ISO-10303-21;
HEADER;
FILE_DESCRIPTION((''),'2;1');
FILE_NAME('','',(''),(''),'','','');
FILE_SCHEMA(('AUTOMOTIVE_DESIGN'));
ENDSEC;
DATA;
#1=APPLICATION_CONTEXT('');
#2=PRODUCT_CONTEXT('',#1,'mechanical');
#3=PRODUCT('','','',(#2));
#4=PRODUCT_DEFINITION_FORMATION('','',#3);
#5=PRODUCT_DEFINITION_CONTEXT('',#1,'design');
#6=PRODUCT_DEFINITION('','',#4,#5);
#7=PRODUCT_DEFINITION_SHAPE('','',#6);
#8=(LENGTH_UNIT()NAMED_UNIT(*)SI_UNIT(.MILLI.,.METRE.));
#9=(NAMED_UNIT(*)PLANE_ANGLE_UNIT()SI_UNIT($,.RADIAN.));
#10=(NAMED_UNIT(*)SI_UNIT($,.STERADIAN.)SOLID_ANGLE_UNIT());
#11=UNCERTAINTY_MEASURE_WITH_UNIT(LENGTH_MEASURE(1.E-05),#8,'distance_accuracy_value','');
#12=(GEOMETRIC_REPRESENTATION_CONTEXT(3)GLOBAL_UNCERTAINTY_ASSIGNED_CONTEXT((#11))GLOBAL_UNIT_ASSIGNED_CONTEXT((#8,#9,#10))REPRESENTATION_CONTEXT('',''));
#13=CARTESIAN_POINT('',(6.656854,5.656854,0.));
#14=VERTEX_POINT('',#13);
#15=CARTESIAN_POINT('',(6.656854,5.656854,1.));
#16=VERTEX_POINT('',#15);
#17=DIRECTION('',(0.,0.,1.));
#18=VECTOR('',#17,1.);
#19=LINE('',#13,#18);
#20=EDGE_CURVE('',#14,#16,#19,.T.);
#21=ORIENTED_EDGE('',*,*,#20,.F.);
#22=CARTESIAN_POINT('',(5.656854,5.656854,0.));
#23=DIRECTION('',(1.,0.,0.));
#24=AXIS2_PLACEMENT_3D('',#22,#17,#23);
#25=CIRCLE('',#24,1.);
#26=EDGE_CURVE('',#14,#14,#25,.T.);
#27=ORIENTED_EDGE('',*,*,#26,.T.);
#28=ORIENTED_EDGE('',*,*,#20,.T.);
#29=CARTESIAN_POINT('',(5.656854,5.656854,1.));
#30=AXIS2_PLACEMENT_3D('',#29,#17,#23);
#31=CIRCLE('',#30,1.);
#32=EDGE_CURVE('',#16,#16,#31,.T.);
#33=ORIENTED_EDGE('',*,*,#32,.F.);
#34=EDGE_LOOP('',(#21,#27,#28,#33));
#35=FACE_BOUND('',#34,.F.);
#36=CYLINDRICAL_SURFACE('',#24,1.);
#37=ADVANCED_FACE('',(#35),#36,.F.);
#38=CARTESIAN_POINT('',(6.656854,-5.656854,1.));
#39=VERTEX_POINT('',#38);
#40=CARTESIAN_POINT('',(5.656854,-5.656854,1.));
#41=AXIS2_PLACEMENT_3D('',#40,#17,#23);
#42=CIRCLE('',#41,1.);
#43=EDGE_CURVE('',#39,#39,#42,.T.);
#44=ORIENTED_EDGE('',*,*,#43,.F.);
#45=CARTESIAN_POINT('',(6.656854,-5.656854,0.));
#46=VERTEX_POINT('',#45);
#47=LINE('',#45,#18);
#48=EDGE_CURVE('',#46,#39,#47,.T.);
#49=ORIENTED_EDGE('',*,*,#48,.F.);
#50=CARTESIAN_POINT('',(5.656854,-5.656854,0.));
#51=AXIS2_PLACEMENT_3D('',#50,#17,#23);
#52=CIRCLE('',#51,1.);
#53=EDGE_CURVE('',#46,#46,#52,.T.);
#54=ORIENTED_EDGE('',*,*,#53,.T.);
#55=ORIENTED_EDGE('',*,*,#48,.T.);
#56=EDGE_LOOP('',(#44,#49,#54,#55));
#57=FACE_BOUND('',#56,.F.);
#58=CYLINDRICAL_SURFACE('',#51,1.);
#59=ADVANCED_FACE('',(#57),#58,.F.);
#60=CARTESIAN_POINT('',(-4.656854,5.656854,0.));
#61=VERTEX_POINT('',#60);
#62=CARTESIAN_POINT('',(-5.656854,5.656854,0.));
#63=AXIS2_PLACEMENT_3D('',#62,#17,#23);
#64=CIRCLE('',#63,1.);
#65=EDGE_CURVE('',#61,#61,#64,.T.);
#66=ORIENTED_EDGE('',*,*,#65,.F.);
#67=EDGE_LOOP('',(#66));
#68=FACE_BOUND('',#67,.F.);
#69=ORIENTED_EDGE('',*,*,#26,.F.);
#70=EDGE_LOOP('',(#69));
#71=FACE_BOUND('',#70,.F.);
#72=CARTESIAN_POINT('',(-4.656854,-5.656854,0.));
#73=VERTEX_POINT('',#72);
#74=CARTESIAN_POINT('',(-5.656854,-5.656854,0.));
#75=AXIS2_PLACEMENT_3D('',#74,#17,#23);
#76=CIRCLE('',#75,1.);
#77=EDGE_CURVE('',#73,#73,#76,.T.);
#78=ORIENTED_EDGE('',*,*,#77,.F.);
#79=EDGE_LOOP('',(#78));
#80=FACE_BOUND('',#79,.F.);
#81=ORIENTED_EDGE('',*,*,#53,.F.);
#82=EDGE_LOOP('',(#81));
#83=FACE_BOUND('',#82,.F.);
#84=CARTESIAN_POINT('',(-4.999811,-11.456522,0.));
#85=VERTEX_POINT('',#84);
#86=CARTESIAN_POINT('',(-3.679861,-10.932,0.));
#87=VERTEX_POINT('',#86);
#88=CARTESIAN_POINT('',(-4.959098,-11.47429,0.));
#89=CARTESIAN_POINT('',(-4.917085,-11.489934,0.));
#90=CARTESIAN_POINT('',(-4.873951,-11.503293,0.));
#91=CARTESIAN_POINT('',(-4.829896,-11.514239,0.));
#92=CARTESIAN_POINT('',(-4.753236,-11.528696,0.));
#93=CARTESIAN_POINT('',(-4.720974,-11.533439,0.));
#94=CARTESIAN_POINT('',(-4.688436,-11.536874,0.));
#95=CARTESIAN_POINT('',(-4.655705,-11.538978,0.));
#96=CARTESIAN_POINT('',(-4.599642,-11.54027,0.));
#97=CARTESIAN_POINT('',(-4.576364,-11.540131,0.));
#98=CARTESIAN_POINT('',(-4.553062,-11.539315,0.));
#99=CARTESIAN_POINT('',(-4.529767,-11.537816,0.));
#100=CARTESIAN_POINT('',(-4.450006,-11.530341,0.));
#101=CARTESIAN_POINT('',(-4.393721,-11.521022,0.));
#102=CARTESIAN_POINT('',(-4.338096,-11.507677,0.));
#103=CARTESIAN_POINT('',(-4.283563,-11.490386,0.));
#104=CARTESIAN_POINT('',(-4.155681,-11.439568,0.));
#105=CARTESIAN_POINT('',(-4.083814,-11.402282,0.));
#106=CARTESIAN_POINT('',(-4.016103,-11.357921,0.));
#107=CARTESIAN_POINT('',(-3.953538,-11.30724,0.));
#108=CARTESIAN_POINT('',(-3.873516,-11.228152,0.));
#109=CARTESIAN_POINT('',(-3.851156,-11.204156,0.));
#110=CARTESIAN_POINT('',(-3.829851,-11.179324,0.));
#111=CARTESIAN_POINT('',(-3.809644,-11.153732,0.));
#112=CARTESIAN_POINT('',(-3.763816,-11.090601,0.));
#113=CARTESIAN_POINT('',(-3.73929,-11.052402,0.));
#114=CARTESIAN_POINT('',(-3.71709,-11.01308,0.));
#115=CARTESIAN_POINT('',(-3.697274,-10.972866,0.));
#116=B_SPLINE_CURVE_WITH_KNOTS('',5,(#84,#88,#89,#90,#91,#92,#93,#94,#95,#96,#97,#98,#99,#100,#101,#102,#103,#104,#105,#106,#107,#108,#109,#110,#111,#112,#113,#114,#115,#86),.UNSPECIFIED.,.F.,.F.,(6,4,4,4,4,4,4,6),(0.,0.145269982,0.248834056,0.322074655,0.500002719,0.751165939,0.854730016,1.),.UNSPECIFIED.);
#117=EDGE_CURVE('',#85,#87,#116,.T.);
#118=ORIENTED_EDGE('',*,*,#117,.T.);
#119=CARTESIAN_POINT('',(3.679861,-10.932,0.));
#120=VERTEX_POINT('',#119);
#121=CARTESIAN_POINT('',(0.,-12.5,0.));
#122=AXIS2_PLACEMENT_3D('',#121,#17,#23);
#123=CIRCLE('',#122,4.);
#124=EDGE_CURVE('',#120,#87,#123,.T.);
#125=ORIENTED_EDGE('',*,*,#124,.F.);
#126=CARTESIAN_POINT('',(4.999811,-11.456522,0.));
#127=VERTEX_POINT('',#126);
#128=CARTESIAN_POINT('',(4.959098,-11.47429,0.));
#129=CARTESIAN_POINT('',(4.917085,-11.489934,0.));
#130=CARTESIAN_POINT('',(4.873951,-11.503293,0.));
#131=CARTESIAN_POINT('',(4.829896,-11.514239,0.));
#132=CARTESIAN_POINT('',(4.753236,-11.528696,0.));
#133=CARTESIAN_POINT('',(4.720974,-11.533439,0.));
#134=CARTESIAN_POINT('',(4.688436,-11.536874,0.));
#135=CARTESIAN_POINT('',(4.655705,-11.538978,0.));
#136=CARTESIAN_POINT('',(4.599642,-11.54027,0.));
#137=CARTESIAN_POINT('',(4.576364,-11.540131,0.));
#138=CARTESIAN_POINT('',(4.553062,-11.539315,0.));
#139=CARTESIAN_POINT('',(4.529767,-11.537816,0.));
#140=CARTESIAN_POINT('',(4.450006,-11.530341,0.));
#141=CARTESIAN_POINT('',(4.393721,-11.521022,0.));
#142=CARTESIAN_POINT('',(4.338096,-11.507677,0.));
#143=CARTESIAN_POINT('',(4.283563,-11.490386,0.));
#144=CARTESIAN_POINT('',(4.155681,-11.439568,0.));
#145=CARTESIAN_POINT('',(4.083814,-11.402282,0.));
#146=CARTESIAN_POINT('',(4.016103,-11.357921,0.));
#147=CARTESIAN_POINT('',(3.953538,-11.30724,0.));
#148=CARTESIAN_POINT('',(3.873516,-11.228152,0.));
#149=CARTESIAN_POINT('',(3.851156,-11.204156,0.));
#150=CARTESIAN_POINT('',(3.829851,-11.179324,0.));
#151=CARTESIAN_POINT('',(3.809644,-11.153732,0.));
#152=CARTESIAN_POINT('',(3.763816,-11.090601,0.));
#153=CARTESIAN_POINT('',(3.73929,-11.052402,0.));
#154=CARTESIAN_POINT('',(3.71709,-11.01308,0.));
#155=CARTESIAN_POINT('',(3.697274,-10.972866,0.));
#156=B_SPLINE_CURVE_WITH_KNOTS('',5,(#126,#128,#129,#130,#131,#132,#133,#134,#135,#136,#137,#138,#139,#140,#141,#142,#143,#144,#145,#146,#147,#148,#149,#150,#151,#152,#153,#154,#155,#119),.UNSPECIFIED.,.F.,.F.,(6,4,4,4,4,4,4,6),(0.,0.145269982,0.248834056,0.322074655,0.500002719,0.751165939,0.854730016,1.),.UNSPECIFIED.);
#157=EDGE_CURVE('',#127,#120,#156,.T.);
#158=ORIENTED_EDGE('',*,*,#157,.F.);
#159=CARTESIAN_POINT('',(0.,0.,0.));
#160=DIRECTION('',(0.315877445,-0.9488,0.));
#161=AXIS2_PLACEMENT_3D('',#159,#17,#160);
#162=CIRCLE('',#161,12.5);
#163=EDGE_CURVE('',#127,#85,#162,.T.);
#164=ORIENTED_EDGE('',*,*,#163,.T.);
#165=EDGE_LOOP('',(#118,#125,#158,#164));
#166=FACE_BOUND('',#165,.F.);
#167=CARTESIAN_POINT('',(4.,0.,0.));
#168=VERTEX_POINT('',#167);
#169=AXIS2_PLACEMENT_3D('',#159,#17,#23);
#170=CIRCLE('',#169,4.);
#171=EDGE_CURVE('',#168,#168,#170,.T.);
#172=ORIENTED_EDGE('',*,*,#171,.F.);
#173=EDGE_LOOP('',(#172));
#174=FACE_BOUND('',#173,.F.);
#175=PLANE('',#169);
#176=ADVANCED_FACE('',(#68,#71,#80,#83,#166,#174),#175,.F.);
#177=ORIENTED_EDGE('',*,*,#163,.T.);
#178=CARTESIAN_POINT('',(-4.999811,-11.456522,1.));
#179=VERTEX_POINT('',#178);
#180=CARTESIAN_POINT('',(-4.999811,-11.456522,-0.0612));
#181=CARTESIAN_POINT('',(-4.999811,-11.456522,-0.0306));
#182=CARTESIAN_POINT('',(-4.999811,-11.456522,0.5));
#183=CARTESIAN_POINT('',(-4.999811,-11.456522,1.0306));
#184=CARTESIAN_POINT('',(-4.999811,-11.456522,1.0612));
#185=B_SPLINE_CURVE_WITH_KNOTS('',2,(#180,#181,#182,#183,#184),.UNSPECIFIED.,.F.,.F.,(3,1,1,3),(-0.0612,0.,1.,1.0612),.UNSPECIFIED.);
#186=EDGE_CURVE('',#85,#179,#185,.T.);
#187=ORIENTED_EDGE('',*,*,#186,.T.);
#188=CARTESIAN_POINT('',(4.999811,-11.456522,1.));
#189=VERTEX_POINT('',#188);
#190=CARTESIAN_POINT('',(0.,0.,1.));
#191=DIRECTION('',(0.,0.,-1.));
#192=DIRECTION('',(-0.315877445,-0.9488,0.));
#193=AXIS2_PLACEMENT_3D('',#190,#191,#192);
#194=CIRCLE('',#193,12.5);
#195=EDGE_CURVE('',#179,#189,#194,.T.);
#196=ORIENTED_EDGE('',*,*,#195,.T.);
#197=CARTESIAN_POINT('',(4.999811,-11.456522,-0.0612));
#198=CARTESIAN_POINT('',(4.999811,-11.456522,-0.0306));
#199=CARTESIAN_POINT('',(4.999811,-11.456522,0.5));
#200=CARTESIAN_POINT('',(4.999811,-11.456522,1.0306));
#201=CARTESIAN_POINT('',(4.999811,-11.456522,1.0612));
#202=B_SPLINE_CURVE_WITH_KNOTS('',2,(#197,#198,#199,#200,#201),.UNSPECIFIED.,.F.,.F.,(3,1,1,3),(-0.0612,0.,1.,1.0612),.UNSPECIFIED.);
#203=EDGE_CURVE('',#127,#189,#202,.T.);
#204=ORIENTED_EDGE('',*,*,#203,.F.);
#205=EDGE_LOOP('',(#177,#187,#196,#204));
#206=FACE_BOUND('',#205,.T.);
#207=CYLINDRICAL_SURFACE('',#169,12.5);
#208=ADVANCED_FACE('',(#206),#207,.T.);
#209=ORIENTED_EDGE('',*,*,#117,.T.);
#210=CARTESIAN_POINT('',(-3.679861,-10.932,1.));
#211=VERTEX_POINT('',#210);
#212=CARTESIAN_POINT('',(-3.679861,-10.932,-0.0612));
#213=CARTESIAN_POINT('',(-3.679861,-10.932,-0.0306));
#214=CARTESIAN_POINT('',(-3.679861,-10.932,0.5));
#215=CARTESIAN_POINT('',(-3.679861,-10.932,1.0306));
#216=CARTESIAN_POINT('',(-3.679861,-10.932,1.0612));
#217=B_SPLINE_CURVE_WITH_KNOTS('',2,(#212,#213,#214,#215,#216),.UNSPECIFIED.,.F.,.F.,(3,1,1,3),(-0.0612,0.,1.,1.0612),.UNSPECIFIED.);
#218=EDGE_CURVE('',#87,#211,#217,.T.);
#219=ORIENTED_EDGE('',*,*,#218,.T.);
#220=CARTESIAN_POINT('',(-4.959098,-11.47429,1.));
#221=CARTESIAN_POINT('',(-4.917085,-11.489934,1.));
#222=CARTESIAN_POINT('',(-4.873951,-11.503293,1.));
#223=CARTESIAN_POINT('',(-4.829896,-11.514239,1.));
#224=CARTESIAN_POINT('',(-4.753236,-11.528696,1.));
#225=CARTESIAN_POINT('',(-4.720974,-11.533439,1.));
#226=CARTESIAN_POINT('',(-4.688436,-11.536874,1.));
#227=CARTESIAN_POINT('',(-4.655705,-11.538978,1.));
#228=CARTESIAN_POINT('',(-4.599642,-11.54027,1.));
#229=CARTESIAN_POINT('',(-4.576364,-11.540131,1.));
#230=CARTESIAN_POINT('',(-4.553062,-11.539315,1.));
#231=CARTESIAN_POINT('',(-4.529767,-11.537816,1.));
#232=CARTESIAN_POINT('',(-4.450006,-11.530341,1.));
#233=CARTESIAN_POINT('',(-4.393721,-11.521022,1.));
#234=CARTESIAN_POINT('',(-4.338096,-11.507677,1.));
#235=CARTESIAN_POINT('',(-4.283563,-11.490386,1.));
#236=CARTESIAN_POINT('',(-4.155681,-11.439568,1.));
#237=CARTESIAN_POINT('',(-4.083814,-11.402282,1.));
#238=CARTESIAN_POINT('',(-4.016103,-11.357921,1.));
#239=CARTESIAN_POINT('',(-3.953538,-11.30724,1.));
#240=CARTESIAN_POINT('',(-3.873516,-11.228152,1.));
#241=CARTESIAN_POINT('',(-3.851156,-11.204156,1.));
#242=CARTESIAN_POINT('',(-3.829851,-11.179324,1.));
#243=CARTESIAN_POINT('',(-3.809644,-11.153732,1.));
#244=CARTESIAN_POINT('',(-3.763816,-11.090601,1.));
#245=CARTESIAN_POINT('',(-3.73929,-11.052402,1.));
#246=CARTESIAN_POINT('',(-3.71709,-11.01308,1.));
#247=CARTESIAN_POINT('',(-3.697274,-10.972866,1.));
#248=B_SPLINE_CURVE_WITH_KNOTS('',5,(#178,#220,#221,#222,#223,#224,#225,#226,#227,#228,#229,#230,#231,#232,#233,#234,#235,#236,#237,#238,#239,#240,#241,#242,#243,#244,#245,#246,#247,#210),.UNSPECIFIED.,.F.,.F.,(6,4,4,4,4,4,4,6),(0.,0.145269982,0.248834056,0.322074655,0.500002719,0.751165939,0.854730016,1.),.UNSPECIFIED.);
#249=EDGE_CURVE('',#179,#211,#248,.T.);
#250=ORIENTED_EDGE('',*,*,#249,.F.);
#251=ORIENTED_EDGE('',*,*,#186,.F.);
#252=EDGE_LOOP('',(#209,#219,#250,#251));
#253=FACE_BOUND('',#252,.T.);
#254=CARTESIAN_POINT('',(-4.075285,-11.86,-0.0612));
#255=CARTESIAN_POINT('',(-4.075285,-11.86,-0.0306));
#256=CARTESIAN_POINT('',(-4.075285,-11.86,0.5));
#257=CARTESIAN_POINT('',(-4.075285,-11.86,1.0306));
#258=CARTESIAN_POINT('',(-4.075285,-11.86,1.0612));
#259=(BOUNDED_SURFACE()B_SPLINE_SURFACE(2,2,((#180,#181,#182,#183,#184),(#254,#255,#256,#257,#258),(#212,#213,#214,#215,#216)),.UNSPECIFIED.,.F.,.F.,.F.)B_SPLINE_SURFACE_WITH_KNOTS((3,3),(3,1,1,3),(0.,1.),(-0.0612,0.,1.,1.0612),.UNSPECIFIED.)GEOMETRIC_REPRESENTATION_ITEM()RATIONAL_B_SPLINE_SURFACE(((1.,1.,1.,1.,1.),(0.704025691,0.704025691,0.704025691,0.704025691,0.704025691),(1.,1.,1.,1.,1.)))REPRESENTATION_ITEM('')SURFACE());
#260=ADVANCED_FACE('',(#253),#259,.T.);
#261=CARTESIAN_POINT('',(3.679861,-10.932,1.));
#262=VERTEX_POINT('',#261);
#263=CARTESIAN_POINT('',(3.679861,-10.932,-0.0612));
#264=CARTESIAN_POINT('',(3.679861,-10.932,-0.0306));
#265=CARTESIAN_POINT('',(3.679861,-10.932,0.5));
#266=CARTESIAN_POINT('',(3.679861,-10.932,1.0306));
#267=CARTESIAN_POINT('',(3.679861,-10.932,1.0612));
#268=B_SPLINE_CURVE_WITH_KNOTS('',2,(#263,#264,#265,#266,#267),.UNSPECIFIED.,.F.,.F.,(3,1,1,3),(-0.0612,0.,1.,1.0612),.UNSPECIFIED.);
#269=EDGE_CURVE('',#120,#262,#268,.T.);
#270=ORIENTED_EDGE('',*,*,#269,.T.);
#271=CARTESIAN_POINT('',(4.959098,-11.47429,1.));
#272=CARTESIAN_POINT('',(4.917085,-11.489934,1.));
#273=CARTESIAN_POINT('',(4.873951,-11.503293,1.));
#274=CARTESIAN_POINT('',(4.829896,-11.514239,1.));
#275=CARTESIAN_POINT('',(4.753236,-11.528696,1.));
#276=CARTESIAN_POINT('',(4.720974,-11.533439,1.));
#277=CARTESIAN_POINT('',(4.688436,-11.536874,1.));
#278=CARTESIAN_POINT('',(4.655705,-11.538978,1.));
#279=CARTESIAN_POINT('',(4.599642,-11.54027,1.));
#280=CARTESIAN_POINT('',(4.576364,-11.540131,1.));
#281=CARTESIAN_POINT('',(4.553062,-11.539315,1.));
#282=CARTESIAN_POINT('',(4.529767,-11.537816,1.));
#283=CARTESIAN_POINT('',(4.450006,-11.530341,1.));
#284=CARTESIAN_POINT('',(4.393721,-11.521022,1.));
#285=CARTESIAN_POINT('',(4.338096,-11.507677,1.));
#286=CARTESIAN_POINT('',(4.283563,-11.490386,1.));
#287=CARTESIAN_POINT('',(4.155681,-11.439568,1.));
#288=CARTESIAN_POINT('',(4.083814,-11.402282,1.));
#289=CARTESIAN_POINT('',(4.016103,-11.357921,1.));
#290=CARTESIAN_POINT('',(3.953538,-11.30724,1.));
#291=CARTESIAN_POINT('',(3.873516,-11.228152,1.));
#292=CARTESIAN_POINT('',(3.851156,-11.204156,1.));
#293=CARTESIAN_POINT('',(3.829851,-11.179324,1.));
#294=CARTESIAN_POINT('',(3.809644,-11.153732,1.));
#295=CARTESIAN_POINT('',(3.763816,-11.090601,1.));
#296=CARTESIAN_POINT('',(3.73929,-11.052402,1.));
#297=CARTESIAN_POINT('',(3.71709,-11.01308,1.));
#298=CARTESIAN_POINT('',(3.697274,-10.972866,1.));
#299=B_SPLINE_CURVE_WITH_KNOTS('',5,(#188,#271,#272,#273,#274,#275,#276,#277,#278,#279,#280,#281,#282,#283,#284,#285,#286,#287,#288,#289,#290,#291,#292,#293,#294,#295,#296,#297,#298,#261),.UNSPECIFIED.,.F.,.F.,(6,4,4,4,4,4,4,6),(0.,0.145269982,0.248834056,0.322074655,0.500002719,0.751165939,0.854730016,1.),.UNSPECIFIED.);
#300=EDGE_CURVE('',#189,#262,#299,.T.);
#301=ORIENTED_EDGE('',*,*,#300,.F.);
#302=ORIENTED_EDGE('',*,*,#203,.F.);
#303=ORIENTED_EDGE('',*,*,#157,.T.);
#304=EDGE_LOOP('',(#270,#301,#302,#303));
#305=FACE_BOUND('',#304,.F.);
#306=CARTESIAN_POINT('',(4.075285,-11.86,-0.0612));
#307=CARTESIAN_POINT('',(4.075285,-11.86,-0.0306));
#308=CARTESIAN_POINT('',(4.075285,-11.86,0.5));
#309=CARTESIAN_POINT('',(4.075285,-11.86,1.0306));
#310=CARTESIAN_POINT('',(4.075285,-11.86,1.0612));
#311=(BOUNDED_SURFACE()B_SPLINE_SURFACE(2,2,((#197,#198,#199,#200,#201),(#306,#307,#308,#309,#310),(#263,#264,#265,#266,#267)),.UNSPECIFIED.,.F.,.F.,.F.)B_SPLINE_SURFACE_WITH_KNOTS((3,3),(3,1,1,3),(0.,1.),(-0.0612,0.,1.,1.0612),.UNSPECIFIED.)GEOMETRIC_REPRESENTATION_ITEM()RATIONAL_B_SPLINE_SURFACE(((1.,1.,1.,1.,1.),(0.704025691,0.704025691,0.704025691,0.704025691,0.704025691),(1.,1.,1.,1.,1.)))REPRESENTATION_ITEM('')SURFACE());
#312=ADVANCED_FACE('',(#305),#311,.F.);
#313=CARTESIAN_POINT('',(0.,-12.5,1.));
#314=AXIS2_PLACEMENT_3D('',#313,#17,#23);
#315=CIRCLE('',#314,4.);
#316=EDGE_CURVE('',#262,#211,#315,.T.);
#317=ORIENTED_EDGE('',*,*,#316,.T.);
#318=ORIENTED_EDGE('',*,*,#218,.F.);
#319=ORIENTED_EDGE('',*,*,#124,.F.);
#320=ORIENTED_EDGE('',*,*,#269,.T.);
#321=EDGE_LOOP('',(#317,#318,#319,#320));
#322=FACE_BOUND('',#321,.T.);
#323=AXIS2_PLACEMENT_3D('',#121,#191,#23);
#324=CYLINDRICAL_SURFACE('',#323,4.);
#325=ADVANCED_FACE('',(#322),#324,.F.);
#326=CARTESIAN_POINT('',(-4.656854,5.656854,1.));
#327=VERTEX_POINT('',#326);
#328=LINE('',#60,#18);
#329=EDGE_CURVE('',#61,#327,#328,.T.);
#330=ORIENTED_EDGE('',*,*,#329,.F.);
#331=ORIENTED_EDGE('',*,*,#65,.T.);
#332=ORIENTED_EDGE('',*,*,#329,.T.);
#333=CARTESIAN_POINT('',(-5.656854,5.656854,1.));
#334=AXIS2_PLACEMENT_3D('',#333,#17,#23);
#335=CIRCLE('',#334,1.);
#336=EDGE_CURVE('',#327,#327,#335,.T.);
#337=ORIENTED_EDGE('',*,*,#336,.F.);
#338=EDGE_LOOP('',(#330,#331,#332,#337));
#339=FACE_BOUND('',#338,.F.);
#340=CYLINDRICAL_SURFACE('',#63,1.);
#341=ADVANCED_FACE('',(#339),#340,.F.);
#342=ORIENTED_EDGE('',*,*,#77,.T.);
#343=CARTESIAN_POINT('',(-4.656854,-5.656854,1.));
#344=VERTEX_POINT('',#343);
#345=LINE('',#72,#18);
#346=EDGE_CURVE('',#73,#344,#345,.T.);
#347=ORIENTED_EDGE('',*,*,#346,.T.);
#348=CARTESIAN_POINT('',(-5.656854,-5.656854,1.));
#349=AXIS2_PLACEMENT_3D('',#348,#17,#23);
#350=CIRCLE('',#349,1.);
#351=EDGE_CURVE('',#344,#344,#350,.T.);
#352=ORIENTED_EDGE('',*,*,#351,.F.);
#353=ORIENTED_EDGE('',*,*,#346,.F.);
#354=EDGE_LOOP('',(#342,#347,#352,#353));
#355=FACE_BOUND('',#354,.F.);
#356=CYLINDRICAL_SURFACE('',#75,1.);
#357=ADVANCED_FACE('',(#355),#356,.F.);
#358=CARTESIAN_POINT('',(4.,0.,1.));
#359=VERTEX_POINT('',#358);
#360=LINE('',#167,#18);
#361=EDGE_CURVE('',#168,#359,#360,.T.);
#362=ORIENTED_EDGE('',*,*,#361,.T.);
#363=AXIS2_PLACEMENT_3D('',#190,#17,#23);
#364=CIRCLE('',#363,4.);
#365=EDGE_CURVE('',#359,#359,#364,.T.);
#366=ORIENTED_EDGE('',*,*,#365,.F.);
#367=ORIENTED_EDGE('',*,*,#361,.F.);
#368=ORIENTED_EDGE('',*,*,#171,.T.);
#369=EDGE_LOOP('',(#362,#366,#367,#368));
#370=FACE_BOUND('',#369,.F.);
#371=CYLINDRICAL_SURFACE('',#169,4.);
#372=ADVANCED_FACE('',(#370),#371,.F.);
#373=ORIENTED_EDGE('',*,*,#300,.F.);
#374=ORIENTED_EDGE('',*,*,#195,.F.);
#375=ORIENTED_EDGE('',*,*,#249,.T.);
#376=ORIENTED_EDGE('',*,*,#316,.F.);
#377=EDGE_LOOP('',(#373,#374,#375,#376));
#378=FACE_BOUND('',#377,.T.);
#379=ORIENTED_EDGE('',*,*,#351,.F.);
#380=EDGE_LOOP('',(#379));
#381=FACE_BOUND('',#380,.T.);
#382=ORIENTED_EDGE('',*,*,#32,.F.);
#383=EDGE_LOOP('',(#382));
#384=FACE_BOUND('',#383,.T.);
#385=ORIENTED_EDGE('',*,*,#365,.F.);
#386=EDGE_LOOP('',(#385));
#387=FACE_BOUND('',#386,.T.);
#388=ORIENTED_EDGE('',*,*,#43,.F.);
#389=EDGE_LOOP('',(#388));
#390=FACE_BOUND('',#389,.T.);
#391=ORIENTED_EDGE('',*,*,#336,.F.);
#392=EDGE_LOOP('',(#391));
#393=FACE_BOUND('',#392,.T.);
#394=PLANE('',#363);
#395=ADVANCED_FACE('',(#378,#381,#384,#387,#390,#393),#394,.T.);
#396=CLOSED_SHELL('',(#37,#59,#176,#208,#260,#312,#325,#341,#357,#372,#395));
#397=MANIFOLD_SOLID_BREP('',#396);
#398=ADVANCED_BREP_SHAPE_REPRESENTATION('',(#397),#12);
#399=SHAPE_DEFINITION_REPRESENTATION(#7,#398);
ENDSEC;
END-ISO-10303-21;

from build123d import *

# Parameters (mm, degrees)
F0_R     = 12.5
F0_R_2   = 1
F0_R_3   = 4
F2_R     = 4
F4_DEPTH = 1
F5_R     = 1


with BuildPart() as f3:
    # F3: sweep along a path in F1
    with BuildLine(Plane.XZ) as f3_path:
        Line((0, 0), (0, 1))
    # F0 (on Top) → F3 (sweep)
    with BuildSketch(Plane.XY):
        Circle(F0_R)
        with Locations((-5.6568542495, -5.6568542495)):
            Circle(F0_R_2, mode=Mode.SUBTRACT)
        with Locations((5.6568542495, -5.6568542495)):
            Circle(F0_R_2, mode=Mode.SUBTRACT)
        with Locations((-5.6568542495, 5.6568542495)):
            Circle(F0_R_2, mode=Mode.SUBTRACT)
        Circle(F0_R_3, mode=Mode.SUBTRACT)
        with Locations((5.6568542495, 5.6568542495)):
            Circle(F0_R_2, mode=Mode.SUBTRACT)
    sweep(path=f3_path.line)

    # F2 (on Top) → F4 (cut, through all)
    with BuildSketch(Plane.XY):
        with Locations((0, -12.5)):
            Circle(F2_R)
    extrude(amount=F4_DEPTH, mode=Mode.SUBTRACT)

    # F5
    f5_edges = [f3.edges().sort_by_distance(p)[0] for p in [
        (-3.948468, -11.86, 0.5),
        (3.948468, -11.86, 0.5),
    ]]
    fillet(f5_edges, radius=F5_R)


solid = f3.part
